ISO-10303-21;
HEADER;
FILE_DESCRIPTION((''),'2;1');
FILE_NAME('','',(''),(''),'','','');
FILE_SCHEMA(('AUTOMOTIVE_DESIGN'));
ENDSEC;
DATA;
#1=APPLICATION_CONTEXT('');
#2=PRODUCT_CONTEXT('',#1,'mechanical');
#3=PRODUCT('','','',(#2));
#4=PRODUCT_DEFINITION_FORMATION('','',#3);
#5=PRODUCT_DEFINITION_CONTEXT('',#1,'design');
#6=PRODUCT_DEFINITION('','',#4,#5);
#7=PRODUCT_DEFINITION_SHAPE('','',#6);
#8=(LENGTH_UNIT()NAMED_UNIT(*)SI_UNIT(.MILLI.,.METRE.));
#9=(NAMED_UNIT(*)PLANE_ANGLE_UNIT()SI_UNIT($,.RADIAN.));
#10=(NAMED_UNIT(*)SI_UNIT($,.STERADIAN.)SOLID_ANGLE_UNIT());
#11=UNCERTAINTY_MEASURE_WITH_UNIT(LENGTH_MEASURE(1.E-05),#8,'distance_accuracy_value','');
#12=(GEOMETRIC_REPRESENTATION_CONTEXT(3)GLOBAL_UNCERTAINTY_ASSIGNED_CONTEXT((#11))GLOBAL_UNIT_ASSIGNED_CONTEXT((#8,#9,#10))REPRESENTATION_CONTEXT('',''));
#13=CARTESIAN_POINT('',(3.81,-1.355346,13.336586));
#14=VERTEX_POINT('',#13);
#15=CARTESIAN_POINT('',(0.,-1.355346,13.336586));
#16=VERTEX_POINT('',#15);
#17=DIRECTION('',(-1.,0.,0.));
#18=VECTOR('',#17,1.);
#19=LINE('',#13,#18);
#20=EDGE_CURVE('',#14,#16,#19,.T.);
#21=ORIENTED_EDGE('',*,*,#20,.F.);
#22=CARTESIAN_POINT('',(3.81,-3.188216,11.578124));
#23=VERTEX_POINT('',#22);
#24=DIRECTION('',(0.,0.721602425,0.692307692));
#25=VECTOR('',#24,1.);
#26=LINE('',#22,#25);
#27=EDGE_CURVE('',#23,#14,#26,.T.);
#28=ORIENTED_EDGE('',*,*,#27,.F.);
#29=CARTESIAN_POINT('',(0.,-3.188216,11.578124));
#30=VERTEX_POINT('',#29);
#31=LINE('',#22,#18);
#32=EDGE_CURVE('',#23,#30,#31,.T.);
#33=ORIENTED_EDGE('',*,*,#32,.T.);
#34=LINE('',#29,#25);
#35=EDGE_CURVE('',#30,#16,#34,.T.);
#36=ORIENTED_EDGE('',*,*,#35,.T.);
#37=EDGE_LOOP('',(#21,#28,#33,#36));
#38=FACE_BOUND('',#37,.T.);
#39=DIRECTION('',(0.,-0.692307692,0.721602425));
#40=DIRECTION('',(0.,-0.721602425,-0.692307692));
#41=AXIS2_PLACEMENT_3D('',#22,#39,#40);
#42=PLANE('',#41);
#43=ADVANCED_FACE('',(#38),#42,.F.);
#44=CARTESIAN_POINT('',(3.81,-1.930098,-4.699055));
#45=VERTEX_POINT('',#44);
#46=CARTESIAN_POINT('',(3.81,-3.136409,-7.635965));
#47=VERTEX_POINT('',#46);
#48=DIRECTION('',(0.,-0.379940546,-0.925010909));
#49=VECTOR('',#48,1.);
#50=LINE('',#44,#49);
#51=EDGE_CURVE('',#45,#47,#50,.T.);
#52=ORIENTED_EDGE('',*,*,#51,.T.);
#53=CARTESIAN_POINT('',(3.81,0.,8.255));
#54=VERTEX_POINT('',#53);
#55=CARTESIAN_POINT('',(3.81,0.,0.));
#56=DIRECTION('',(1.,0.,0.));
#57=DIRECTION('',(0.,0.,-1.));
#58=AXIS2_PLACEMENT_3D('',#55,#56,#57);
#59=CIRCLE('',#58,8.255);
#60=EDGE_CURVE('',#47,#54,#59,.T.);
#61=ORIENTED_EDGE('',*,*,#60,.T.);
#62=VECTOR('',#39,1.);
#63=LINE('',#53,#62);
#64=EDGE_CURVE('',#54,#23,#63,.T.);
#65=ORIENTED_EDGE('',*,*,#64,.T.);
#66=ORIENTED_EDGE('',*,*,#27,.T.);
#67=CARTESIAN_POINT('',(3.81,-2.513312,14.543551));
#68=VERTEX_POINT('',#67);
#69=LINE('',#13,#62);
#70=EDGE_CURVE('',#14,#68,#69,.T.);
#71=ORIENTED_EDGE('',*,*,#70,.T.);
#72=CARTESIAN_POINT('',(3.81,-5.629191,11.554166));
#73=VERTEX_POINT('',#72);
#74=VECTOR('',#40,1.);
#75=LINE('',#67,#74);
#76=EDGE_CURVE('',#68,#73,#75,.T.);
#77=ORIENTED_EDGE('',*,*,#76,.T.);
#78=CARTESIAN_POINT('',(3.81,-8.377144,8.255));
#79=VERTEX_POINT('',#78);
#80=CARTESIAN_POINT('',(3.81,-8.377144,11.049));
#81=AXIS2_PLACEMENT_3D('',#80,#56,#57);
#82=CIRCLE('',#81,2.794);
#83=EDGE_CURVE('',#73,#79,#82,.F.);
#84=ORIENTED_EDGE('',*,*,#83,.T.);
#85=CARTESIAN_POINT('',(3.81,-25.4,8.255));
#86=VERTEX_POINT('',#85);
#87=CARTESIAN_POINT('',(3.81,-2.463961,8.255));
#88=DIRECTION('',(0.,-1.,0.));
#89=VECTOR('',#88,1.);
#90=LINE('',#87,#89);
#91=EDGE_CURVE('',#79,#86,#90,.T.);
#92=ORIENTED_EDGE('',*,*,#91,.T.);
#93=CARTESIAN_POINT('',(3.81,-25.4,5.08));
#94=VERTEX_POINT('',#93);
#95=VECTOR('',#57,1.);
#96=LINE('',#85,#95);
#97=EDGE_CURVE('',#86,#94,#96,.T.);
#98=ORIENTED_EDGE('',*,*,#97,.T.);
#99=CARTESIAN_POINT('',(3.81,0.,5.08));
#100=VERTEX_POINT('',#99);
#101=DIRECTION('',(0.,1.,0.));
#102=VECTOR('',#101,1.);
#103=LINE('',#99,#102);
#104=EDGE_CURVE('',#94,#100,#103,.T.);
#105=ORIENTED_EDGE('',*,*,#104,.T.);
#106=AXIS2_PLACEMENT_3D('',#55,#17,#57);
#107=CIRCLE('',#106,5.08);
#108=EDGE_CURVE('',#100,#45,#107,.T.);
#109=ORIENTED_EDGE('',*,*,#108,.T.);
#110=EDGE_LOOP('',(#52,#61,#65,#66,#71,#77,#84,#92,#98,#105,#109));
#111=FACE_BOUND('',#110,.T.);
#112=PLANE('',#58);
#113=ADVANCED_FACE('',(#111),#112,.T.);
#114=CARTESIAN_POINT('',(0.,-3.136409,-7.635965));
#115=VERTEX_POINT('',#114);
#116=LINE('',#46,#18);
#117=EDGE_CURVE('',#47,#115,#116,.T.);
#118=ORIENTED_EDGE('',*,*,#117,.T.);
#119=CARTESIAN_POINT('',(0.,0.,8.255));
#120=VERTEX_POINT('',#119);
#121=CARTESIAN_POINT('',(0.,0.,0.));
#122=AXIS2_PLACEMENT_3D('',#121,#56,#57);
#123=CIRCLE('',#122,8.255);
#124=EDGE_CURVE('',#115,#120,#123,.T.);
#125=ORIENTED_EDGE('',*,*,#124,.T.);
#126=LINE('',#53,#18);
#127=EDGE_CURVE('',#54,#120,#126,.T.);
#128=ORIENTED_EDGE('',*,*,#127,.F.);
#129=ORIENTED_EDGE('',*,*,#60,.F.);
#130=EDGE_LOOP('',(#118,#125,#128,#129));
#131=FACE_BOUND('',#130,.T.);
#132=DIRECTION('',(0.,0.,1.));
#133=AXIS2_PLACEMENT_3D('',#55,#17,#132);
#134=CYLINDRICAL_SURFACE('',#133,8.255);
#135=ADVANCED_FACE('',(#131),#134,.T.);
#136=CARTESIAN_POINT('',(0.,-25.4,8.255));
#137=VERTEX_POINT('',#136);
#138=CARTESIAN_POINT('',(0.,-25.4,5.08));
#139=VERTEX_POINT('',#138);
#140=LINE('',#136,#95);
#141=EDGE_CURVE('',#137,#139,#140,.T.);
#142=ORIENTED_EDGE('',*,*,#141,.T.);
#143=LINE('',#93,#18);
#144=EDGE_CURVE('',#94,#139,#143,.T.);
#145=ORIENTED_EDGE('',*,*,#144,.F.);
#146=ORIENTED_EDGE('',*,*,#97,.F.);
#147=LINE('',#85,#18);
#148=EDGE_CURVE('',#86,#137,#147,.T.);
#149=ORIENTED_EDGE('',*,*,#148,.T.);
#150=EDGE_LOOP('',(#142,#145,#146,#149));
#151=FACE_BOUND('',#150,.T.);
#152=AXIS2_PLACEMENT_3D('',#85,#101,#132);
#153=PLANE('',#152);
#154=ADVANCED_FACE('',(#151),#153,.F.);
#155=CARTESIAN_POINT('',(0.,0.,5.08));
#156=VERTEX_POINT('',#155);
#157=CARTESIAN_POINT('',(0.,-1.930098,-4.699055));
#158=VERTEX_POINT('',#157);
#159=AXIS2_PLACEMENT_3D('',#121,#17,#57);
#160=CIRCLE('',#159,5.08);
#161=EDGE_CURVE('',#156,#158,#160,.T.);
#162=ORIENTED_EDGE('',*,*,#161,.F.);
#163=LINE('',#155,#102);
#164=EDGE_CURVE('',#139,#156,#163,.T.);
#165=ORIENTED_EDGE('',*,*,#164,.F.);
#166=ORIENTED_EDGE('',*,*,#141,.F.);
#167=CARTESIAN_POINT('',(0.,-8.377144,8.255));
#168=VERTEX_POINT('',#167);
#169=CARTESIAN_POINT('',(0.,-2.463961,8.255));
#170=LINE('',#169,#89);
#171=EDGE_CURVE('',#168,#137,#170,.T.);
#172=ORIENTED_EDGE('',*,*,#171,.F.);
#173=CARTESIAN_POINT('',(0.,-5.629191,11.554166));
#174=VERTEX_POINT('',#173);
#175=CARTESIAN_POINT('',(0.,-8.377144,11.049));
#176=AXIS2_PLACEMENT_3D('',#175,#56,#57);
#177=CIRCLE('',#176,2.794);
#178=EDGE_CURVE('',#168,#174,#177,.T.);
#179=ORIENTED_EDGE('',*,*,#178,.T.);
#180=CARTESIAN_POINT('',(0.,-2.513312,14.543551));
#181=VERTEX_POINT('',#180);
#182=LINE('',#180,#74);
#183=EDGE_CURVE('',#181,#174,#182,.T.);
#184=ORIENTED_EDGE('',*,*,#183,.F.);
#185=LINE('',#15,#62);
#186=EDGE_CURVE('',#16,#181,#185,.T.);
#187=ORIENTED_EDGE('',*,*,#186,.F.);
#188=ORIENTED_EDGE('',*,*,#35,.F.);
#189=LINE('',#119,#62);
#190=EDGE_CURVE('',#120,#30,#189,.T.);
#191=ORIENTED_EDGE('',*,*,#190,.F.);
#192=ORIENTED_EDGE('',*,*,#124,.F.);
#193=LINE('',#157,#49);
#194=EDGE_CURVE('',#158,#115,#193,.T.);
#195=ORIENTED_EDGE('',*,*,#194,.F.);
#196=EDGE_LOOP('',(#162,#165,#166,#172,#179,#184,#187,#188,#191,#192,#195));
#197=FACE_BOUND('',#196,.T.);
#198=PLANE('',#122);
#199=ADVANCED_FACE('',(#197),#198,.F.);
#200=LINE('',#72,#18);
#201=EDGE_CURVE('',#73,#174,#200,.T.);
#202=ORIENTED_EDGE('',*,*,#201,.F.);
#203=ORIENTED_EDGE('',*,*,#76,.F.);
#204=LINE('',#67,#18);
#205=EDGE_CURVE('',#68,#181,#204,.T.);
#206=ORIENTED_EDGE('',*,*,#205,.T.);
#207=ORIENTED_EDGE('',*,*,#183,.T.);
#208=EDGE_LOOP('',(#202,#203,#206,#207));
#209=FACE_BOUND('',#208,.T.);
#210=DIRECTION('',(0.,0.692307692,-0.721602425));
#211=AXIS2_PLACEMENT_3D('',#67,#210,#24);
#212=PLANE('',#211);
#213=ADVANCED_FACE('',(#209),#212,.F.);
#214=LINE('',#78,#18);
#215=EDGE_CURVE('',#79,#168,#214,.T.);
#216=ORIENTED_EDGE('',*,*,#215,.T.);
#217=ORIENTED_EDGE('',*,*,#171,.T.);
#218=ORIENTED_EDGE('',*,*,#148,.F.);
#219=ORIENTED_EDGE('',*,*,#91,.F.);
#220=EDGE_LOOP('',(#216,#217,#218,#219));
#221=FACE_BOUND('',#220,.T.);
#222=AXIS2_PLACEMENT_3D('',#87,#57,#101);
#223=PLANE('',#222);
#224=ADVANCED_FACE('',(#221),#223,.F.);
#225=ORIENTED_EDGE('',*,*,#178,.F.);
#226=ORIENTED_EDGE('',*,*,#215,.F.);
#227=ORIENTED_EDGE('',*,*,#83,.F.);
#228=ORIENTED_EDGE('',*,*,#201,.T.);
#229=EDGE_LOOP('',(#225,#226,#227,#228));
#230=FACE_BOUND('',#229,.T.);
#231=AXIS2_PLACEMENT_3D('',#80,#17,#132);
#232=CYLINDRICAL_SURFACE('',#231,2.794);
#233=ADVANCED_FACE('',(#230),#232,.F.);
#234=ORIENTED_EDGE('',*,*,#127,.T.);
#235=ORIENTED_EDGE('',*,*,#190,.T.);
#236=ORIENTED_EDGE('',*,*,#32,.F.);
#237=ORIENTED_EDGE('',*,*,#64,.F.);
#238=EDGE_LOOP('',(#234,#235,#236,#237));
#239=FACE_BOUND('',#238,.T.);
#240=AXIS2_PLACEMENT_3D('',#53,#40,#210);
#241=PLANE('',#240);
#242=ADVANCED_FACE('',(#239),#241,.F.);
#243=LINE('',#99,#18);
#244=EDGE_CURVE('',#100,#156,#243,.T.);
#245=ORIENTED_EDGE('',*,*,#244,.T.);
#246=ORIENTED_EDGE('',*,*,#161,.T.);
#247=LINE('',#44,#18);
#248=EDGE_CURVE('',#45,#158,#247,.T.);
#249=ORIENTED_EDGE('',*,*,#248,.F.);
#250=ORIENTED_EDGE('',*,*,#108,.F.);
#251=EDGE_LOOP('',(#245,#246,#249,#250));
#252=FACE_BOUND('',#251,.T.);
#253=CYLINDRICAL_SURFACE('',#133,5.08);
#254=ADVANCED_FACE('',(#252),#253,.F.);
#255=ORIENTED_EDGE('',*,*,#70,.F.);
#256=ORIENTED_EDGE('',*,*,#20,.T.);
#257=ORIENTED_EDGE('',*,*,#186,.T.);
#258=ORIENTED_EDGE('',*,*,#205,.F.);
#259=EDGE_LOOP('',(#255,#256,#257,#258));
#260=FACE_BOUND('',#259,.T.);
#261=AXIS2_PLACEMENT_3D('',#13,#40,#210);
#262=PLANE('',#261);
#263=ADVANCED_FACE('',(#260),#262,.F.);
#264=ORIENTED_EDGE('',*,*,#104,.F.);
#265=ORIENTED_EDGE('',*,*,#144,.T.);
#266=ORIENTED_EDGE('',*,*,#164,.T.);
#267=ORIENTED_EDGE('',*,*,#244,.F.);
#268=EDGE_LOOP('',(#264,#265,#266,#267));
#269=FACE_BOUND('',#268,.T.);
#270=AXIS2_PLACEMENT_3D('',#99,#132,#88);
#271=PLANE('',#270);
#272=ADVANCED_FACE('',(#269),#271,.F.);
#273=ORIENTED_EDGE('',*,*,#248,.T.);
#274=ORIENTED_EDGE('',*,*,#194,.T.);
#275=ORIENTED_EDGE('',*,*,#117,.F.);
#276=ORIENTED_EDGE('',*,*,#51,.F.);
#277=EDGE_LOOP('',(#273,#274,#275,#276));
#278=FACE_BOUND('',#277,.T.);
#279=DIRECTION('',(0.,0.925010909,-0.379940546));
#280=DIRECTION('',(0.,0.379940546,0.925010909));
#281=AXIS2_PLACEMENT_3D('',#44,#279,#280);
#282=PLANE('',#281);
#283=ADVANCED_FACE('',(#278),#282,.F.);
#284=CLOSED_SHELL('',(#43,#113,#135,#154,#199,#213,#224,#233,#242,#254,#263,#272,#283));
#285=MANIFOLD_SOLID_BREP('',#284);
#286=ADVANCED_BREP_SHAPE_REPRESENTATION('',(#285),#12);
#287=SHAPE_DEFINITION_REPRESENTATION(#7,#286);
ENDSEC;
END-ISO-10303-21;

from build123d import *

# Parameters (mm, degrees)
BOSS_EXTRUDE1_DEPTH = 3.81
FILLET1_R           = 2.794


with BuildPart() as part:
    # Sketch1 → Boss-Extrude1 (new body)
    with BuildSketch(Plane(origin=(0, 0, 0), x_dir=(0, 0, -1), z_dir=(1, 0, 0))):
        with BuildLine():
            Line((-5.08, 0), (-5.08, -25.4))
            Line((-5.08, -25.4), (-8.255, -25.4))
            Line((-8.255, -25.4), (-8.255, -2.463960679))
            Line((-8.255, -2.463960679), (-11.554166285, -5.629191448))
            Line((-11.554166285, -5.629191448), (-14.543550901, -2.513312179))
            Line((-14.543550901, -2.513312179), (-13.336585788, -1.355345959))
            Line((-13.336585788, -1.355345959), (-11.57812425, -3.188216118))
            Line((-11.57812425, -3.188216118), (-8.255, 0))
            ThreePointArc((-8.255, 0), (1.598457615, 8.098762761), (7.635965052, -3.136409209))
            Line((7.635965052, -3.136409209), (4.699055417, -1.930097975))
            ThreePointArc((4.699055417, -1.930097975), (0.983666225, 4.983854007), (-5.08, 0))
        make_face()
    extrude(amount=BOSS_EXTRUDE1_DEPTH)

    # Fillet1
    # the kernel refuses this fillet: 2.794 mm, written as the material it adds along each edge
    with BuildSketch(Plane(origin=(0, -2.463960679, 8.255), x_dir=(0, -1, 0), z_dir=(1, 0, 0))) as fillet1_piece_1:
        with BuildLine():
            CenterArc((5.913183284, -2.794), FILLET1_R, 90, 100.416592131)
            Line((3.165230769, -3.299166285), (3.110271719, -3.309269611))
            ThreePointArc((3.110271719, -3.309269611), (1.542292241, -1.688269296), (-0.040323143, -0.038686154))
            Line((-0.040323143, -0.038686154), (0, 0.05588))
            Line((0, 0.05588), (5.913183284, 0.05588))
            Line((5.913183284, 0.05588), (5.913183284, 0))
        make_face()
    extrude(amount=3.81)


solid = part.part
